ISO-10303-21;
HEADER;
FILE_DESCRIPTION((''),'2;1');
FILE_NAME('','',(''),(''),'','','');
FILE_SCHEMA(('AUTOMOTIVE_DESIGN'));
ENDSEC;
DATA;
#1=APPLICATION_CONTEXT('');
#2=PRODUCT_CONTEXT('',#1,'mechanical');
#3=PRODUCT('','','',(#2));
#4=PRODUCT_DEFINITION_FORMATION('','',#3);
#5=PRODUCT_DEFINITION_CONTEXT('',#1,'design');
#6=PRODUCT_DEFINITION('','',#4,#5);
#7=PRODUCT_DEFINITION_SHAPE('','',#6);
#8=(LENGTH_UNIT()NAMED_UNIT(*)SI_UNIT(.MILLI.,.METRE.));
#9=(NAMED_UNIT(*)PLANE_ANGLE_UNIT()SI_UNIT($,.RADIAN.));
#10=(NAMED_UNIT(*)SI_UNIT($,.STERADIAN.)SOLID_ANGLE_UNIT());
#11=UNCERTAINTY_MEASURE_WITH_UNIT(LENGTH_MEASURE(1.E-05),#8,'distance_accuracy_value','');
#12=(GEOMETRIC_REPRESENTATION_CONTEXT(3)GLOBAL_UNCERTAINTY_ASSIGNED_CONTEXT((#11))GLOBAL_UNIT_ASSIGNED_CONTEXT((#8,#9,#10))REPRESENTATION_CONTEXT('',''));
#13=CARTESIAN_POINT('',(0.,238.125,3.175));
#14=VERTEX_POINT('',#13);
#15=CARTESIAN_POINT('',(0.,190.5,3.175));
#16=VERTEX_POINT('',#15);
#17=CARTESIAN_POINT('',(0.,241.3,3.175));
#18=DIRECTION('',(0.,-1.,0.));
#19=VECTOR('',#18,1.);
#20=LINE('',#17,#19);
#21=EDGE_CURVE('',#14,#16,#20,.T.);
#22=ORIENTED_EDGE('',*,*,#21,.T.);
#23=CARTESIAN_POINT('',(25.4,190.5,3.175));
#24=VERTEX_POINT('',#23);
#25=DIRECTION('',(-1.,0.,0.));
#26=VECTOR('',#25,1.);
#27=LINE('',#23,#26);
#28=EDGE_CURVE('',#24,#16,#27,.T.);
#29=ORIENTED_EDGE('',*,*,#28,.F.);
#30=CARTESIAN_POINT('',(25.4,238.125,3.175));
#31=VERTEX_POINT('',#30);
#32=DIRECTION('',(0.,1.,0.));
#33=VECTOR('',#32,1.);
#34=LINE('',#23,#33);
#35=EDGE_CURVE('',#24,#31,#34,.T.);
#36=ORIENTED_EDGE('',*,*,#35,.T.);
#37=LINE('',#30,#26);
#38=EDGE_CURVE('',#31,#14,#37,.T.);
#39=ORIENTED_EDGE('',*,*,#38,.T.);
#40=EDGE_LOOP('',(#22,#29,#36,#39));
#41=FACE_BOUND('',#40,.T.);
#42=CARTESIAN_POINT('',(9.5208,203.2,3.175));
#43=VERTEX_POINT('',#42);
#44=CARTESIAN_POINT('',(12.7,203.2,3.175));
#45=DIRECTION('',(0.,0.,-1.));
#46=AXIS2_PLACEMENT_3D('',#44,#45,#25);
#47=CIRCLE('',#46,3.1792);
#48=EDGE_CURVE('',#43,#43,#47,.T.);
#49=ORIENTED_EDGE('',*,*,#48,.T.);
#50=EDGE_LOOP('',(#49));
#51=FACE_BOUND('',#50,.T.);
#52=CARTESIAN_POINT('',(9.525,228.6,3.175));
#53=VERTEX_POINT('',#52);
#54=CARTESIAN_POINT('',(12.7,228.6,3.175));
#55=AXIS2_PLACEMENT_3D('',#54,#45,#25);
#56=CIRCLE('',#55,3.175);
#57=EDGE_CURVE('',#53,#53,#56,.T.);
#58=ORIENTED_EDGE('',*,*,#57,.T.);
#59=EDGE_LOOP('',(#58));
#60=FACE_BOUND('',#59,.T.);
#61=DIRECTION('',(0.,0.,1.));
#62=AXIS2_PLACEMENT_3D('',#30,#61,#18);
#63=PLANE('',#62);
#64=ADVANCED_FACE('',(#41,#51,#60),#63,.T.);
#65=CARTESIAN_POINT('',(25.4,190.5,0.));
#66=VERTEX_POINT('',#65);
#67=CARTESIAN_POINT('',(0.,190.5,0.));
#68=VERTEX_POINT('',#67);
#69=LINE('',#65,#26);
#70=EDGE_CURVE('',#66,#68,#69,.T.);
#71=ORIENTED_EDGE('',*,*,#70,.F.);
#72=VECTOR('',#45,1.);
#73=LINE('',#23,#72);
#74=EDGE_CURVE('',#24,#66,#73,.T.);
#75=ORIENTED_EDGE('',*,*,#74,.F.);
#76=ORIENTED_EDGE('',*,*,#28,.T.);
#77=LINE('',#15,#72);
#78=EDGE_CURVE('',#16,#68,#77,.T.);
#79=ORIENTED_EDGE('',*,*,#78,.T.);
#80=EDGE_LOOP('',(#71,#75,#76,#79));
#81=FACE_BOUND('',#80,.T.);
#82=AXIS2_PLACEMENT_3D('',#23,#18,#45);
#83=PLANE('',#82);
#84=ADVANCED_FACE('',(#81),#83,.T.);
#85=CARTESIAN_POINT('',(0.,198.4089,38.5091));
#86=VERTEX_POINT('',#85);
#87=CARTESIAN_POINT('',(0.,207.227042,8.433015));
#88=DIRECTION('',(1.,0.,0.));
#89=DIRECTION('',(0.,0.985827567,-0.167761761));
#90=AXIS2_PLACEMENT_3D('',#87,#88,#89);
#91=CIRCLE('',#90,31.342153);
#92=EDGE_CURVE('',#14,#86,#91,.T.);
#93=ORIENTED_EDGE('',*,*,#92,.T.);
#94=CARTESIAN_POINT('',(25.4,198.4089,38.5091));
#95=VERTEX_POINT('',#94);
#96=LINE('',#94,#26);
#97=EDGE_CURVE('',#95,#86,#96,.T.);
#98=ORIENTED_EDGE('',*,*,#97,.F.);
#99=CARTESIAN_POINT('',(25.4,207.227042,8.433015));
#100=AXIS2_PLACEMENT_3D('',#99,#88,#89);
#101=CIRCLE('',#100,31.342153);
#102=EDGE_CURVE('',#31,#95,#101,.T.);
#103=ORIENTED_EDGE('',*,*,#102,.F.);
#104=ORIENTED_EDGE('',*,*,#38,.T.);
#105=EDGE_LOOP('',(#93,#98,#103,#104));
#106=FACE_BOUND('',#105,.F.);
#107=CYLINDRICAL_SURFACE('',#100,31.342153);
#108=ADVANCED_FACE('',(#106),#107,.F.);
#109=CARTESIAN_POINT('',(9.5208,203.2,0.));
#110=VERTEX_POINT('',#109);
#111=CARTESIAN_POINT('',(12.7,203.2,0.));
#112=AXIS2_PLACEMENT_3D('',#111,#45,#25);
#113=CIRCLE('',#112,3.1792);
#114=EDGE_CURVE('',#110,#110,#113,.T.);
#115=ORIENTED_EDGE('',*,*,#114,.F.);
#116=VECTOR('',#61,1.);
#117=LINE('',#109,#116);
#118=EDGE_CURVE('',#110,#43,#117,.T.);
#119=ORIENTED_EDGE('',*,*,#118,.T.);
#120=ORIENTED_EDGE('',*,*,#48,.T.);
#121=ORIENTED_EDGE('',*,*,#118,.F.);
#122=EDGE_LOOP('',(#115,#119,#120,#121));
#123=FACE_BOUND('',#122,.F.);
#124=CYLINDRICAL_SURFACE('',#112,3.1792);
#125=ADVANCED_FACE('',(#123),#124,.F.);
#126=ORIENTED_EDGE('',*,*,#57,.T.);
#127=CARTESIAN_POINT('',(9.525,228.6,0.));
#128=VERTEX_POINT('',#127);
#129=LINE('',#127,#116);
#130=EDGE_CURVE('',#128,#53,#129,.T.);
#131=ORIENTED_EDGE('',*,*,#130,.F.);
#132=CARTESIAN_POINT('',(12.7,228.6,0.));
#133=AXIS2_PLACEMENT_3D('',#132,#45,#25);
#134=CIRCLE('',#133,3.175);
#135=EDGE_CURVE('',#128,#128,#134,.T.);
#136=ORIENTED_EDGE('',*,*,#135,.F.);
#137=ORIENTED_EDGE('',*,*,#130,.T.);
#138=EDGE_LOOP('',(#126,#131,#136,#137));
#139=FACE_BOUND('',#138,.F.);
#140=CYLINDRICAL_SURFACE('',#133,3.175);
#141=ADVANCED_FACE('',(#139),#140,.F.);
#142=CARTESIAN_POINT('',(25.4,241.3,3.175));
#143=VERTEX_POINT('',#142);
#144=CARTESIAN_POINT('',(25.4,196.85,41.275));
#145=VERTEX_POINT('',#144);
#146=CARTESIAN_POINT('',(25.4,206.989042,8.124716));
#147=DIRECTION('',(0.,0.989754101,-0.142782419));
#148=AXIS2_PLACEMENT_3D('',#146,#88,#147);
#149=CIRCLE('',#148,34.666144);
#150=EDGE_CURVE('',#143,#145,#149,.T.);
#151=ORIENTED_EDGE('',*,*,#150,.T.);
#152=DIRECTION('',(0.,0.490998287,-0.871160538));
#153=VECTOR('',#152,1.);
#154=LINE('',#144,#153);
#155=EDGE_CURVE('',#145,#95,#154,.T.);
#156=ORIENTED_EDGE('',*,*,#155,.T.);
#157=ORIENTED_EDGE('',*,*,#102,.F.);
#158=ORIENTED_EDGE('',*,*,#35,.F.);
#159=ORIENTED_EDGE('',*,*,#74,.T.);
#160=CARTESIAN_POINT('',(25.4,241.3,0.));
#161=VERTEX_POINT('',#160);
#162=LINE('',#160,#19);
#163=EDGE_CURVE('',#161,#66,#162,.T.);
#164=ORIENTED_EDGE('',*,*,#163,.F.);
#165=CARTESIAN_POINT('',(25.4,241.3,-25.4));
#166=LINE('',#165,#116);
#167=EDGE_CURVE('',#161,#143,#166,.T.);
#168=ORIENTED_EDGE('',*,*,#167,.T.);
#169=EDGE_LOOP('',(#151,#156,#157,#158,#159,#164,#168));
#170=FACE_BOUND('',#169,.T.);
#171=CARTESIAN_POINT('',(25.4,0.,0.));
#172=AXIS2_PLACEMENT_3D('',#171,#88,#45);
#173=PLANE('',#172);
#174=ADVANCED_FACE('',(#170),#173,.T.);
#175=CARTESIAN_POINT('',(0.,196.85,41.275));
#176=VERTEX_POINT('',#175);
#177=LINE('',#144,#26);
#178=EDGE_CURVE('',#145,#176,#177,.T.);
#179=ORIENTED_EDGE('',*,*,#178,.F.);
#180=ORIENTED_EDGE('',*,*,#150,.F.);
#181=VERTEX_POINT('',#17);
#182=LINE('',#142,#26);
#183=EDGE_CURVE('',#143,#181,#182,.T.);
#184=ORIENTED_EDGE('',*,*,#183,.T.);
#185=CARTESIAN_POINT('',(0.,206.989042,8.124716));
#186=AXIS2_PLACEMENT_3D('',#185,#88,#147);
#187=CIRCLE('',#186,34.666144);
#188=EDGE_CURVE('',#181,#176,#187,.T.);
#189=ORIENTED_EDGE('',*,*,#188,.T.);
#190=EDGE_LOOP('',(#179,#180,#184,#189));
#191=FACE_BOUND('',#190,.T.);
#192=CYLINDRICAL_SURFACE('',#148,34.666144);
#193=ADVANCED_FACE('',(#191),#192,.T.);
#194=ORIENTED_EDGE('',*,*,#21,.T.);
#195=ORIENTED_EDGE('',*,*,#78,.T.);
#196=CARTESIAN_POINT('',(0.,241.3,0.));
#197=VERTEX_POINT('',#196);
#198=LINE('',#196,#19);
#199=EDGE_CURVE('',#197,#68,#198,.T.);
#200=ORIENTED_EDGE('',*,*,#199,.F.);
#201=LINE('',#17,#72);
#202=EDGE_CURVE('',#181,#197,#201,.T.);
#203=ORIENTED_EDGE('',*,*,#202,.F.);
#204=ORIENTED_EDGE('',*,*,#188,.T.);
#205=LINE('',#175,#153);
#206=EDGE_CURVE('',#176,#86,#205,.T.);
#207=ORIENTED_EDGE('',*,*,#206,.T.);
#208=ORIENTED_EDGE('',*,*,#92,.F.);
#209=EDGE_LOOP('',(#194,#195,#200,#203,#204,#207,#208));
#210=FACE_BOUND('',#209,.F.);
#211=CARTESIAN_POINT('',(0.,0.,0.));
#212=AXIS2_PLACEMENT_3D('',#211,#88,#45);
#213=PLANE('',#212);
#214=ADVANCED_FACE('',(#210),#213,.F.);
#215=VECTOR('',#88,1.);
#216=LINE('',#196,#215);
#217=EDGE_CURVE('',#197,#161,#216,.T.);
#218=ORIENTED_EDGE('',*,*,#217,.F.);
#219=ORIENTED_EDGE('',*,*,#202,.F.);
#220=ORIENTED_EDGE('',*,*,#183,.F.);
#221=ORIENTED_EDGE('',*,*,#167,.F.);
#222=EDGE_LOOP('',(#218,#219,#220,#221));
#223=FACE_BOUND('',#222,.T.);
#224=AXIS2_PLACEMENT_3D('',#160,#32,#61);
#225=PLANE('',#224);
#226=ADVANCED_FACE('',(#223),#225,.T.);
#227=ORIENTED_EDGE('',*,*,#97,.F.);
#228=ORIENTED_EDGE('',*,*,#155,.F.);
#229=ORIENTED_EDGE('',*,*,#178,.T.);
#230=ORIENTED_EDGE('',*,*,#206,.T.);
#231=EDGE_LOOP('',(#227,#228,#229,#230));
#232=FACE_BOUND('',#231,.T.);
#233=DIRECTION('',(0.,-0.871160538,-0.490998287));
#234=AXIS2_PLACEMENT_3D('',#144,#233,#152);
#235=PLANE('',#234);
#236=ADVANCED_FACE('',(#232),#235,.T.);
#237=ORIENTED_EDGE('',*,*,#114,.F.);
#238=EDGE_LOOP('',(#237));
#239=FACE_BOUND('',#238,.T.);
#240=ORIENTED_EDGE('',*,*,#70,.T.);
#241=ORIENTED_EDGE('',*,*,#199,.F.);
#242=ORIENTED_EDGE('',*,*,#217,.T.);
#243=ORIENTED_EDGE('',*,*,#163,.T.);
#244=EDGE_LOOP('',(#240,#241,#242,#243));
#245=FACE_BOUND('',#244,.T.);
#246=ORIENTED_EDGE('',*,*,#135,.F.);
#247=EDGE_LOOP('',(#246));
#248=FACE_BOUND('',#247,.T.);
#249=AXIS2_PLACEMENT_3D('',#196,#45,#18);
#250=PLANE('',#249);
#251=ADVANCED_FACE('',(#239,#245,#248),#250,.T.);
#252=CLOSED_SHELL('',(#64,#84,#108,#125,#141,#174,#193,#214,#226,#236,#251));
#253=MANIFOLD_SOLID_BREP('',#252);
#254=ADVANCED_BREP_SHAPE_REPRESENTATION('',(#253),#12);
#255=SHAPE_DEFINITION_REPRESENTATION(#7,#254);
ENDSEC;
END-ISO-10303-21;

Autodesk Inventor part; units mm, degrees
ref_plane "YZ Plane" through (0, 0, 0) normal (1, 0, 0) x (0, 1, 0)
ref_plane "XZ Plane" through (0, 0, 0) normal (0, 1, 0) x (-1, 0, 0)
ref_plane "XY Plane" through (0, 0, 0) normal (0, 0, 1) x (1, 0, 0)
sketch "Sketch1" plane through (0, 0, 0) normal (1, 0, 0) x (0, 1, 0)
  line L0 (0, 0) -> (241.3, 0)
  line L1 (241.3, 0) -> (241.3, -25.4)
  line L2 (241.3, -25.4) -> (0, -25.4)
  line L3 (0, -25.4) -> (0, 0)
  line L4 (6.3489, -9.0357) -> (12.6978, -5.3677)
  line L5 (12.6978, -5.3677) -> (19.0489, -9.0319)
  line L6 (19.0489, -9.0319) -> (19.0511, -16.3643)
  line L7 (19.0511, -16.3643) -> (12.7022, -20.0323)
  line L8 (12.7022, -20.0323) -> (6.3511, -16.3681)
  line L9 (6.3511, -16.3681) -> (6.3489, -9.0357)
  point P0 (12.7, -12.7)
  dimension "d0" = 241.3
  dimension "d1" = 25.4
  dimension "d3" = 12.7
  dimension "d4" = 12.7
extrude "Extrusion1" add sketch "Sketch1" along normal blind 25.4
sketch "Sketch2" plane through (0, 241.3, 0) normal (0, 1, 0) x (1, 0, 0)
  line L0 (0, 25.4) -> (25.4, 25.4) projected
  line L1 (0, 0) -> (25.4, 0)
  line L2 (25.4, 0) -> (25.4, 25.4)
  line L3 (25.4, 25.4) -> (0, 25.4)
  line L4 (0, 25.4) -> (0, 0)
  line L5 (22.225, 3.175) -> (3.175, 3.175)
  line L6 (3.175, 3.175) -> (3.175, 22.225)
  line L7 (3.175, 22.225) -> (22.225, 22.225)
  line L8 (22.225, 22.225) -> (22.225, 3.175)
  dimension "d7" = 3.175
extrude "Extrusion2" cut sketch "Sketch2" against normal blind 228.6 contours L5 L6 L7 L8
sketch "Sketch3" plane through (25.4, 0, 0) normal (1, 0, 0) x (0, 0, -1)
  line L0 (0, 241.3) -> (0, 190.5)
  line L1 (0, 0) -> (0, 241.3) projected
  line L2 (0, 241.3) -> (-3.175, 241.3)
  line L3 (-3.175, 241.3) -> (-3.175, 190.5)
  line L4 (-3.175, 190.5) -> (0, 190.5)
  line L5 (0, 190.5) -> (0, 241.3)
  arc A0 (-3.175, 241.3) -> (-46.143, 196.9282) centre (-8.4506, 203.4185) ccw
  line L6 (-3.175, 241.3) -> (-3.175, 238.125)
  arc A1 (-3.175, 238.125) -> (-42.9327, 197.9157) centre (-7.6224, 202.7623) ccw
  line L7 (-42.9327, 197.9157) -> (-46.143, 196.9282)
  dimension "d11" = 50.8
  dimension "d13" = 3.175
  dimension "d15" = 3.175
extrude "Extrusion3" add sketch "Sketch3" against normal blind 25.4 contours L0 L4 L3 L2
sketch "Sketch4" plane through (25.4, 0, 0) normal (1, 0, 0) x (0, 0, -1)
  point P0 (0, 0)
sketch "Sketch5" plane through (25.4, 0, 0) normal (1, 0, 0) x (0, 0, -1)
  line L0 (-3.175, 241.3) -> (-3.175, 190.5) projected
  line L1 (-3.175, 241.3) -> (-3.175, 196.85)
  line L2 (-3.175, 196.85) -> (-41.275, 196.85)
  arc A0 (-3.175, 241.3) -> (-41.275, 196.85) centre (-8.1247, 206.989) ccw
  line L3 (-41.275, 196.85) -> (-38.5091, 198.4089)
  line L4 (-3.175, 241.3) -> (-3.175, 238.125)
  arc A1 (-3.175, 238.125) -> (-38.5091, 198.4089) centre (-8.433, 207.227) ccw
  point P0 (0, 0)
  dimension "d18" = 44.45
  dimension "d19" = 38.1
  dimension "d20" = 3.175
  dimension "d21" = 3.175
extrude "Extrusion4" add sketch "Sketch5" against normal blind 25.4 contours L0 A1 L3 A0
sketch "Sketch6" plane through (25.4, 0, 0) normal (1, 0, 0) x (0, 0, -1)
  line L0 (0, 0) -> (25.4, 0) projected
  line L1 (25.4, 0) -> (25.4, 241.3) projected
  line L2 (12.7618, 20.0321) -> (19.0807, 16.3125)
  line L3 (19.0807, 16.3125) -> (19.0189, 8.9804)
  line L4 (19.0189, 8.9804) -> (12.6382, 5.3679)
  line L5 (12.6382, 5.3679) -> (6.3193, 9.0875)
  line L6 (6.3193, 9.0875) -> (6.3811, 16.4196)
  line L7 (6.3811, 16.4196) -> (12.7618, 20.0321)
  point P0 (12.7, 12.7)
  point P1 (12.7, 12.7)
  dimension "d25" = 12.7
  dimension "d26" = 12.7
  dimension "d27" = 12.7
extrude "Extrusion5" cut sketch "Sketch6" against normal blind 25.4
sketch "Sketch7" plane through (0, 0, 0) normal (-1, 0, 0) x (0, 0, 1)
  line L0 (-25.4, 241.3) -> (0, 241.3)
  line L1 (0, 241.3) -> (0, 0)
  line L2 (0, 0) -> (-25.4, 0)
  line L3 (-25.4, 0) -> (-25.4, 241.3)
extrude "Extrusion6" cut sketch "Sketch7" against normal blind 25.4
sketch "Sketch8" plane through (0, 190.5, 0) normal (0, 0, -1) x (-1, 0, 0)
  circle A0 centre (-12.7, 38.1) radius 3.175
  circle A1 centre (-12.7, 12.7) radius 3.1792
  line L0 (-25.4, 50.8) -> (0, 50.8) projected
  line L1 (-25.4, 0) -> (0, 0) projected
  point P0 (0, -190.5)
  dimension "d32" = 6.35
  dimension "d33" = 12.7
  dimension "d34" = 12.7
  dimension "d35" = 38.1
extrude "Extrusion7" cut sketch "Sketch8" against normal blind 3.175
properties part number "hand"
